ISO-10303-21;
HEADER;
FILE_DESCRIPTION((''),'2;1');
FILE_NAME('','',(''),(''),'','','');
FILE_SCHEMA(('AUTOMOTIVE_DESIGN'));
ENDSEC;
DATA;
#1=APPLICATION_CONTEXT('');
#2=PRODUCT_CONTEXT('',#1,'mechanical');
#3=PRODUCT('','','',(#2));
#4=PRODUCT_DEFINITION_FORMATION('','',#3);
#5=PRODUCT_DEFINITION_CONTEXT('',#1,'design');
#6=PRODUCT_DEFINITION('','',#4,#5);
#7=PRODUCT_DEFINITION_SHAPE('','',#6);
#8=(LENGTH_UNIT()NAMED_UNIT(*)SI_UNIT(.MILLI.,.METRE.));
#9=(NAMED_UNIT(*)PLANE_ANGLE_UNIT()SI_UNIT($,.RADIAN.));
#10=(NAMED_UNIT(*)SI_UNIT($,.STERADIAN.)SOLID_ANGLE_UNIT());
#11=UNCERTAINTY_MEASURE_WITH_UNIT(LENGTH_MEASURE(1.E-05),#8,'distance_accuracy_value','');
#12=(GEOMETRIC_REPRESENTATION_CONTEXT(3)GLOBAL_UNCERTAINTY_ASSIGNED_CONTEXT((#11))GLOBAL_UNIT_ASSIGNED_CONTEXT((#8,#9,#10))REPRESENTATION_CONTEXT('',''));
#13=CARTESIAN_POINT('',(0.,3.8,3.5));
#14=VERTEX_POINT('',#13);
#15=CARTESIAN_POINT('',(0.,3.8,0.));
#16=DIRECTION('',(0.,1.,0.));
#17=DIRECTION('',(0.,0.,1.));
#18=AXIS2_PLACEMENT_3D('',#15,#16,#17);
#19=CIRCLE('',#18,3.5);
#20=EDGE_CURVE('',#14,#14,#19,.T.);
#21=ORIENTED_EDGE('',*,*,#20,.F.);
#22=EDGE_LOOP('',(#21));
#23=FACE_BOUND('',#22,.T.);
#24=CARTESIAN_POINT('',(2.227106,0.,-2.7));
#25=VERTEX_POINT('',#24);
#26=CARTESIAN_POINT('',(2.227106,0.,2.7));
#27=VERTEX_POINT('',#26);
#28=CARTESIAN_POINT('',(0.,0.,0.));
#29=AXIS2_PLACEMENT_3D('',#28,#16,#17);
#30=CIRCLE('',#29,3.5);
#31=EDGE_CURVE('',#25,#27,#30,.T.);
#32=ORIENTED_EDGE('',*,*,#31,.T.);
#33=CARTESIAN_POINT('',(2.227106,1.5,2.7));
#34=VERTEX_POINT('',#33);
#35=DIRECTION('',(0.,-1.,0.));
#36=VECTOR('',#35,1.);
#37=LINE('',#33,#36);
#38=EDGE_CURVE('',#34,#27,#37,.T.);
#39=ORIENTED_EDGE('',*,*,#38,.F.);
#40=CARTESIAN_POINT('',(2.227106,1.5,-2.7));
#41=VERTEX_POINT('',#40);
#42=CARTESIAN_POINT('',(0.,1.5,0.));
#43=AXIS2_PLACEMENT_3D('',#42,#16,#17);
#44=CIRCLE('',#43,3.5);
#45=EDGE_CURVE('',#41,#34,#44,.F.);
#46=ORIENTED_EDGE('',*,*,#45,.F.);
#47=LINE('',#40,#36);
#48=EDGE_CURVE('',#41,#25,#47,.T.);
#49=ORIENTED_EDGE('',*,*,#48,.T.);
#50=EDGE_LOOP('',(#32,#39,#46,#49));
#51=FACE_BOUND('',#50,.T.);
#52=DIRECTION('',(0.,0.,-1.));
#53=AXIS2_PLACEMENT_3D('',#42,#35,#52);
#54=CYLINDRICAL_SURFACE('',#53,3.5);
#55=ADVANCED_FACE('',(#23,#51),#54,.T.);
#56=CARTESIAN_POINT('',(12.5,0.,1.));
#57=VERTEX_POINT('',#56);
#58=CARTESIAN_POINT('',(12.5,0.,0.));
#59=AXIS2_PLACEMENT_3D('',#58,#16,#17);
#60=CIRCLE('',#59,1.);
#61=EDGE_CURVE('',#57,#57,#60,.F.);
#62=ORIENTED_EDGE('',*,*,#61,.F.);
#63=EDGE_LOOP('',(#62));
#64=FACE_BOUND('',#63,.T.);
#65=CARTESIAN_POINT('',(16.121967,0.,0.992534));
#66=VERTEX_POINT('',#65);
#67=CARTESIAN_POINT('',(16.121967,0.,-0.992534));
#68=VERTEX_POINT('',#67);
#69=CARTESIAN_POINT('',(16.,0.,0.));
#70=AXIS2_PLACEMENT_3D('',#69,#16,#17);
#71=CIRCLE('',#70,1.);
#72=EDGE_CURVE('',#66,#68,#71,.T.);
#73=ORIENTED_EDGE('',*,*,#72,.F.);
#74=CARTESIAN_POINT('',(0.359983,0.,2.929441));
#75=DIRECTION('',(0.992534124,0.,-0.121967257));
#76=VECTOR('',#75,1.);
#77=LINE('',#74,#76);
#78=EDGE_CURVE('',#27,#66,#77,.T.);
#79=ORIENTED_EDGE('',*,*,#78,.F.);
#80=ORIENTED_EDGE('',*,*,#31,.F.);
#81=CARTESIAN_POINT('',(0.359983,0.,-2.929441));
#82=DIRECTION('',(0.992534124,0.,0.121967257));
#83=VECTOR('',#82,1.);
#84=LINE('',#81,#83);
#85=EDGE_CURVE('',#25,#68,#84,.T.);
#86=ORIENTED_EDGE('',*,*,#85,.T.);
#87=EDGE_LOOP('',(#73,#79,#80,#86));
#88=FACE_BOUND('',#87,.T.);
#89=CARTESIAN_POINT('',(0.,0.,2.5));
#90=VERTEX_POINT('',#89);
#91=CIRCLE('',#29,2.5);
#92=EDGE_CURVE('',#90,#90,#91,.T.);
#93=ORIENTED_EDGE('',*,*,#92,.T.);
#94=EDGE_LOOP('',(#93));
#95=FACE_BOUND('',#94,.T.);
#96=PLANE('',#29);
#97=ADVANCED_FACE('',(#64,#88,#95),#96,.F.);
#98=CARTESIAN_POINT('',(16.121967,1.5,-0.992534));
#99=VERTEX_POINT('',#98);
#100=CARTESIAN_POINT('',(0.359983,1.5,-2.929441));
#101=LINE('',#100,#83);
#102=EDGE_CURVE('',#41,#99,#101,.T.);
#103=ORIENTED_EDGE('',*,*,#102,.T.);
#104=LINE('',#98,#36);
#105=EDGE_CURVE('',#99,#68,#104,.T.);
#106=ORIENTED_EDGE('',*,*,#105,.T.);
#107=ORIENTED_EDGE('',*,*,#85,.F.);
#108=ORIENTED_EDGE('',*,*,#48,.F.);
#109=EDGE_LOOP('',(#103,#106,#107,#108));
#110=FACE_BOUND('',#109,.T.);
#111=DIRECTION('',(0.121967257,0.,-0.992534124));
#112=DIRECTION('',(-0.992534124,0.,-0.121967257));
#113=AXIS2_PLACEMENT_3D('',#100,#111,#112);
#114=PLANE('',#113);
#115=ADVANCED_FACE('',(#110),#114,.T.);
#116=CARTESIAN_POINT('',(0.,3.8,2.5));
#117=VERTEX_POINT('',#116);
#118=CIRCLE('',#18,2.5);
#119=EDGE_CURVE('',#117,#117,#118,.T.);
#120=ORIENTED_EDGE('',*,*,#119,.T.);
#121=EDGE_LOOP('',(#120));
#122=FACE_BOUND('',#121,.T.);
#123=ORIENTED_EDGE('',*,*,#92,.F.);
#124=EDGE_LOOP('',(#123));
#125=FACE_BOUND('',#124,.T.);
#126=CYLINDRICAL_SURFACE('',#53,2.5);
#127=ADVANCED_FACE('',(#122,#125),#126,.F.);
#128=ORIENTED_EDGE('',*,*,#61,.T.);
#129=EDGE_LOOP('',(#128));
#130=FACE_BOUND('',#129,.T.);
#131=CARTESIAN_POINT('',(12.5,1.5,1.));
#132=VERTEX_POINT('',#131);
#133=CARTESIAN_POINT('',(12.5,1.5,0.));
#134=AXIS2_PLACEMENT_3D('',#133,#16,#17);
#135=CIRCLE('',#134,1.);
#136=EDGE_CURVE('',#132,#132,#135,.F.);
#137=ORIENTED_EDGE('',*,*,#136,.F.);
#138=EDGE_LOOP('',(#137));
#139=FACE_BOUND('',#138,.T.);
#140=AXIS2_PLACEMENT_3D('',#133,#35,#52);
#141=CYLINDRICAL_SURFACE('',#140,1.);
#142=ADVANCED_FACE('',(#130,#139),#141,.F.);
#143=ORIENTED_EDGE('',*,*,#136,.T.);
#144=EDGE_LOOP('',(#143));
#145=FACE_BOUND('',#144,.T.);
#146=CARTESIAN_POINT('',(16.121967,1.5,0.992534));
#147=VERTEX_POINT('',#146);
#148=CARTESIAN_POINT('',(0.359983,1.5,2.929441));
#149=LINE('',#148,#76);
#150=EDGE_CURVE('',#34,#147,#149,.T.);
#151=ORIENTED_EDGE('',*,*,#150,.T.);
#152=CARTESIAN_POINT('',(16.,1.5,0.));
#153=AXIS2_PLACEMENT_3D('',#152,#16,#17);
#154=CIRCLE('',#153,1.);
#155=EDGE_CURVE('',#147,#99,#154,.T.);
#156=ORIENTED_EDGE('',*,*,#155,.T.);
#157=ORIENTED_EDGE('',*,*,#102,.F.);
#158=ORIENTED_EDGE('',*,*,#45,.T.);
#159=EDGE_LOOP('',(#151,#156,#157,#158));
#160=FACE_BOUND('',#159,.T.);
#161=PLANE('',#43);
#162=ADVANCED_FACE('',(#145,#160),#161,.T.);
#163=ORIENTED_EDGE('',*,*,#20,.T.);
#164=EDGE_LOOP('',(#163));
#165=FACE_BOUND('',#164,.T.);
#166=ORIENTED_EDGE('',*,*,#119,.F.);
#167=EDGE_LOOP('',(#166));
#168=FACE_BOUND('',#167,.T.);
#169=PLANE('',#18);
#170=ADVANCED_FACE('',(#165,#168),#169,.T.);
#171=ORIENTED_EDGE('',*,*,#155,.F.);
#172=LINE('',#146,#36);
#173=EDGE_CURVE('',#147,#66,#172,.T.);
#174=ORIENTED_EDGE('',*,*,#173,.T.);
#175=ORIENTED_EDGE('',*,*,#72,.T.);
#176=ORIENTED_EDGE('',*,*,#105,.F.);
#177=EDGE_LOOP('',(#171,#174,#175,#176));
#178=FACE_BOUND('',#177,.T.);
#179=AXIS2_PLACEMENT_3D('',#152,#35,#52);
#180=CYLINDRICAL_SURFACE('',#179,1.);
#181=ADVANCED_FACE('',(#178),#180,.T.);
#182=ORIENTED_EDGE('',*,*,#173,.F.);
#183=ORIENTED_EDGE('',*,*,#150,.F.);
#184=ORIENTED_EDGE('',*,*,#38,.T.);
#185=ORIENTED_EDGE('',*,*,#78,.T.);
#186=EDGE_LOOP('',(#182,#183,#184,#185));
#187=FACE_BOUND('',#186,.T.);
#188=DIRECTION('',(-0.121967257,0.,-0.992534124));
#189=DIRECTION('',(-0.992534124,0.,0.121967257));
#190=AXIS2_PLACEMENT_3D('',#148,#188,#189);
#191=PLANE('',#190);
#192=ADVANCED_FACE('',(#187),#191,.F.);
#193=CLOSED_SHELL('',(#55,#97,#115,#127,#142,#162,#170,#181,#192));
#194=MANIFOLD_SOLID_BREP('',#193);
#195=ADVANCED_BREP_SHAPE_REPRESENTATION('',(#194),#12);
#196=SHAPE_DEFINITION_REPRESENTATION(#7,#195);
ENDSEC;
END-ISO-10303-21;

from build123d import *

# Parameters (mm, degrees)
SKETCH1_R           = 2.5
SKETCH1_R_2         = 1
BOSS_EXTRUDE1_DEPTH = 1.5
SKETCH1_3_R         = 2.5
BOSS_EXTRUDE2_DEPTH = 3.8


with BuildPart() as part:
    # Sketch1 → Boss-Extrude1 (new body)
    with BuildSketch(Plane(origin=(0, 0, 0), x_dir=(1, 0, 0), z_dir=(0, 1, 0))):
        with BuildLine():
            ThreePointArc((2.227105745, 2.7), (-3.5, 0), (2.227105745, -2.7))
            Line((2.227105745, -2.7), (16.121967257, -0.992534124))
            ThreePointArc((16.121967257, -0.992534124), (17, 0), (16.121967257, 0.992534124))
            Line((16.121967257, 0.992534124), (2.227105745, 2.7))
        make_face()
        Circle(SKETCH1_R, mode=Mode.SUBTRACT)
        with Locations((12.5, 0)):
            Circle(SKETCH1_R_2, mode=Mode.SUBTRACT)
    extrude(amount=BOSS_EXTRUDE1_DEPTH)

    # Sketch1<3> → Boss-Extrude2 (add)
    with BuildSketch(Plane(origin=(0, 0, 0), x_dir=(1, 0, 0), z_dir=(0, 1, 0))):
        with BuildLine():
            ThreePointArc((2.227105745, 2.7), (0, 3.5), (-2.227105745, 2.7))
            ThreePointArc((-2.227105745, 2.7), (-3.5, 0), (-2.227105745, -2.7))
            ThreePointArc((-2.227105745, -2.7), (0, -3.5), (2.227105745, -2.7))
            ThreePointArc((2.227105745, -2.7), (3.165822966, -1.492502913), (3.5, 0))
            ThreePointArc((3.5, 0), (3.165822966, 1.492502913), (2.227105745, 2.7))
        make_face()
        Circle(SKETCH1_3_R, mode=Mode.SUBTRACT)
    extrude(amount=BOSS_EXTRUDE2_DEPTH)


solid = part.part
